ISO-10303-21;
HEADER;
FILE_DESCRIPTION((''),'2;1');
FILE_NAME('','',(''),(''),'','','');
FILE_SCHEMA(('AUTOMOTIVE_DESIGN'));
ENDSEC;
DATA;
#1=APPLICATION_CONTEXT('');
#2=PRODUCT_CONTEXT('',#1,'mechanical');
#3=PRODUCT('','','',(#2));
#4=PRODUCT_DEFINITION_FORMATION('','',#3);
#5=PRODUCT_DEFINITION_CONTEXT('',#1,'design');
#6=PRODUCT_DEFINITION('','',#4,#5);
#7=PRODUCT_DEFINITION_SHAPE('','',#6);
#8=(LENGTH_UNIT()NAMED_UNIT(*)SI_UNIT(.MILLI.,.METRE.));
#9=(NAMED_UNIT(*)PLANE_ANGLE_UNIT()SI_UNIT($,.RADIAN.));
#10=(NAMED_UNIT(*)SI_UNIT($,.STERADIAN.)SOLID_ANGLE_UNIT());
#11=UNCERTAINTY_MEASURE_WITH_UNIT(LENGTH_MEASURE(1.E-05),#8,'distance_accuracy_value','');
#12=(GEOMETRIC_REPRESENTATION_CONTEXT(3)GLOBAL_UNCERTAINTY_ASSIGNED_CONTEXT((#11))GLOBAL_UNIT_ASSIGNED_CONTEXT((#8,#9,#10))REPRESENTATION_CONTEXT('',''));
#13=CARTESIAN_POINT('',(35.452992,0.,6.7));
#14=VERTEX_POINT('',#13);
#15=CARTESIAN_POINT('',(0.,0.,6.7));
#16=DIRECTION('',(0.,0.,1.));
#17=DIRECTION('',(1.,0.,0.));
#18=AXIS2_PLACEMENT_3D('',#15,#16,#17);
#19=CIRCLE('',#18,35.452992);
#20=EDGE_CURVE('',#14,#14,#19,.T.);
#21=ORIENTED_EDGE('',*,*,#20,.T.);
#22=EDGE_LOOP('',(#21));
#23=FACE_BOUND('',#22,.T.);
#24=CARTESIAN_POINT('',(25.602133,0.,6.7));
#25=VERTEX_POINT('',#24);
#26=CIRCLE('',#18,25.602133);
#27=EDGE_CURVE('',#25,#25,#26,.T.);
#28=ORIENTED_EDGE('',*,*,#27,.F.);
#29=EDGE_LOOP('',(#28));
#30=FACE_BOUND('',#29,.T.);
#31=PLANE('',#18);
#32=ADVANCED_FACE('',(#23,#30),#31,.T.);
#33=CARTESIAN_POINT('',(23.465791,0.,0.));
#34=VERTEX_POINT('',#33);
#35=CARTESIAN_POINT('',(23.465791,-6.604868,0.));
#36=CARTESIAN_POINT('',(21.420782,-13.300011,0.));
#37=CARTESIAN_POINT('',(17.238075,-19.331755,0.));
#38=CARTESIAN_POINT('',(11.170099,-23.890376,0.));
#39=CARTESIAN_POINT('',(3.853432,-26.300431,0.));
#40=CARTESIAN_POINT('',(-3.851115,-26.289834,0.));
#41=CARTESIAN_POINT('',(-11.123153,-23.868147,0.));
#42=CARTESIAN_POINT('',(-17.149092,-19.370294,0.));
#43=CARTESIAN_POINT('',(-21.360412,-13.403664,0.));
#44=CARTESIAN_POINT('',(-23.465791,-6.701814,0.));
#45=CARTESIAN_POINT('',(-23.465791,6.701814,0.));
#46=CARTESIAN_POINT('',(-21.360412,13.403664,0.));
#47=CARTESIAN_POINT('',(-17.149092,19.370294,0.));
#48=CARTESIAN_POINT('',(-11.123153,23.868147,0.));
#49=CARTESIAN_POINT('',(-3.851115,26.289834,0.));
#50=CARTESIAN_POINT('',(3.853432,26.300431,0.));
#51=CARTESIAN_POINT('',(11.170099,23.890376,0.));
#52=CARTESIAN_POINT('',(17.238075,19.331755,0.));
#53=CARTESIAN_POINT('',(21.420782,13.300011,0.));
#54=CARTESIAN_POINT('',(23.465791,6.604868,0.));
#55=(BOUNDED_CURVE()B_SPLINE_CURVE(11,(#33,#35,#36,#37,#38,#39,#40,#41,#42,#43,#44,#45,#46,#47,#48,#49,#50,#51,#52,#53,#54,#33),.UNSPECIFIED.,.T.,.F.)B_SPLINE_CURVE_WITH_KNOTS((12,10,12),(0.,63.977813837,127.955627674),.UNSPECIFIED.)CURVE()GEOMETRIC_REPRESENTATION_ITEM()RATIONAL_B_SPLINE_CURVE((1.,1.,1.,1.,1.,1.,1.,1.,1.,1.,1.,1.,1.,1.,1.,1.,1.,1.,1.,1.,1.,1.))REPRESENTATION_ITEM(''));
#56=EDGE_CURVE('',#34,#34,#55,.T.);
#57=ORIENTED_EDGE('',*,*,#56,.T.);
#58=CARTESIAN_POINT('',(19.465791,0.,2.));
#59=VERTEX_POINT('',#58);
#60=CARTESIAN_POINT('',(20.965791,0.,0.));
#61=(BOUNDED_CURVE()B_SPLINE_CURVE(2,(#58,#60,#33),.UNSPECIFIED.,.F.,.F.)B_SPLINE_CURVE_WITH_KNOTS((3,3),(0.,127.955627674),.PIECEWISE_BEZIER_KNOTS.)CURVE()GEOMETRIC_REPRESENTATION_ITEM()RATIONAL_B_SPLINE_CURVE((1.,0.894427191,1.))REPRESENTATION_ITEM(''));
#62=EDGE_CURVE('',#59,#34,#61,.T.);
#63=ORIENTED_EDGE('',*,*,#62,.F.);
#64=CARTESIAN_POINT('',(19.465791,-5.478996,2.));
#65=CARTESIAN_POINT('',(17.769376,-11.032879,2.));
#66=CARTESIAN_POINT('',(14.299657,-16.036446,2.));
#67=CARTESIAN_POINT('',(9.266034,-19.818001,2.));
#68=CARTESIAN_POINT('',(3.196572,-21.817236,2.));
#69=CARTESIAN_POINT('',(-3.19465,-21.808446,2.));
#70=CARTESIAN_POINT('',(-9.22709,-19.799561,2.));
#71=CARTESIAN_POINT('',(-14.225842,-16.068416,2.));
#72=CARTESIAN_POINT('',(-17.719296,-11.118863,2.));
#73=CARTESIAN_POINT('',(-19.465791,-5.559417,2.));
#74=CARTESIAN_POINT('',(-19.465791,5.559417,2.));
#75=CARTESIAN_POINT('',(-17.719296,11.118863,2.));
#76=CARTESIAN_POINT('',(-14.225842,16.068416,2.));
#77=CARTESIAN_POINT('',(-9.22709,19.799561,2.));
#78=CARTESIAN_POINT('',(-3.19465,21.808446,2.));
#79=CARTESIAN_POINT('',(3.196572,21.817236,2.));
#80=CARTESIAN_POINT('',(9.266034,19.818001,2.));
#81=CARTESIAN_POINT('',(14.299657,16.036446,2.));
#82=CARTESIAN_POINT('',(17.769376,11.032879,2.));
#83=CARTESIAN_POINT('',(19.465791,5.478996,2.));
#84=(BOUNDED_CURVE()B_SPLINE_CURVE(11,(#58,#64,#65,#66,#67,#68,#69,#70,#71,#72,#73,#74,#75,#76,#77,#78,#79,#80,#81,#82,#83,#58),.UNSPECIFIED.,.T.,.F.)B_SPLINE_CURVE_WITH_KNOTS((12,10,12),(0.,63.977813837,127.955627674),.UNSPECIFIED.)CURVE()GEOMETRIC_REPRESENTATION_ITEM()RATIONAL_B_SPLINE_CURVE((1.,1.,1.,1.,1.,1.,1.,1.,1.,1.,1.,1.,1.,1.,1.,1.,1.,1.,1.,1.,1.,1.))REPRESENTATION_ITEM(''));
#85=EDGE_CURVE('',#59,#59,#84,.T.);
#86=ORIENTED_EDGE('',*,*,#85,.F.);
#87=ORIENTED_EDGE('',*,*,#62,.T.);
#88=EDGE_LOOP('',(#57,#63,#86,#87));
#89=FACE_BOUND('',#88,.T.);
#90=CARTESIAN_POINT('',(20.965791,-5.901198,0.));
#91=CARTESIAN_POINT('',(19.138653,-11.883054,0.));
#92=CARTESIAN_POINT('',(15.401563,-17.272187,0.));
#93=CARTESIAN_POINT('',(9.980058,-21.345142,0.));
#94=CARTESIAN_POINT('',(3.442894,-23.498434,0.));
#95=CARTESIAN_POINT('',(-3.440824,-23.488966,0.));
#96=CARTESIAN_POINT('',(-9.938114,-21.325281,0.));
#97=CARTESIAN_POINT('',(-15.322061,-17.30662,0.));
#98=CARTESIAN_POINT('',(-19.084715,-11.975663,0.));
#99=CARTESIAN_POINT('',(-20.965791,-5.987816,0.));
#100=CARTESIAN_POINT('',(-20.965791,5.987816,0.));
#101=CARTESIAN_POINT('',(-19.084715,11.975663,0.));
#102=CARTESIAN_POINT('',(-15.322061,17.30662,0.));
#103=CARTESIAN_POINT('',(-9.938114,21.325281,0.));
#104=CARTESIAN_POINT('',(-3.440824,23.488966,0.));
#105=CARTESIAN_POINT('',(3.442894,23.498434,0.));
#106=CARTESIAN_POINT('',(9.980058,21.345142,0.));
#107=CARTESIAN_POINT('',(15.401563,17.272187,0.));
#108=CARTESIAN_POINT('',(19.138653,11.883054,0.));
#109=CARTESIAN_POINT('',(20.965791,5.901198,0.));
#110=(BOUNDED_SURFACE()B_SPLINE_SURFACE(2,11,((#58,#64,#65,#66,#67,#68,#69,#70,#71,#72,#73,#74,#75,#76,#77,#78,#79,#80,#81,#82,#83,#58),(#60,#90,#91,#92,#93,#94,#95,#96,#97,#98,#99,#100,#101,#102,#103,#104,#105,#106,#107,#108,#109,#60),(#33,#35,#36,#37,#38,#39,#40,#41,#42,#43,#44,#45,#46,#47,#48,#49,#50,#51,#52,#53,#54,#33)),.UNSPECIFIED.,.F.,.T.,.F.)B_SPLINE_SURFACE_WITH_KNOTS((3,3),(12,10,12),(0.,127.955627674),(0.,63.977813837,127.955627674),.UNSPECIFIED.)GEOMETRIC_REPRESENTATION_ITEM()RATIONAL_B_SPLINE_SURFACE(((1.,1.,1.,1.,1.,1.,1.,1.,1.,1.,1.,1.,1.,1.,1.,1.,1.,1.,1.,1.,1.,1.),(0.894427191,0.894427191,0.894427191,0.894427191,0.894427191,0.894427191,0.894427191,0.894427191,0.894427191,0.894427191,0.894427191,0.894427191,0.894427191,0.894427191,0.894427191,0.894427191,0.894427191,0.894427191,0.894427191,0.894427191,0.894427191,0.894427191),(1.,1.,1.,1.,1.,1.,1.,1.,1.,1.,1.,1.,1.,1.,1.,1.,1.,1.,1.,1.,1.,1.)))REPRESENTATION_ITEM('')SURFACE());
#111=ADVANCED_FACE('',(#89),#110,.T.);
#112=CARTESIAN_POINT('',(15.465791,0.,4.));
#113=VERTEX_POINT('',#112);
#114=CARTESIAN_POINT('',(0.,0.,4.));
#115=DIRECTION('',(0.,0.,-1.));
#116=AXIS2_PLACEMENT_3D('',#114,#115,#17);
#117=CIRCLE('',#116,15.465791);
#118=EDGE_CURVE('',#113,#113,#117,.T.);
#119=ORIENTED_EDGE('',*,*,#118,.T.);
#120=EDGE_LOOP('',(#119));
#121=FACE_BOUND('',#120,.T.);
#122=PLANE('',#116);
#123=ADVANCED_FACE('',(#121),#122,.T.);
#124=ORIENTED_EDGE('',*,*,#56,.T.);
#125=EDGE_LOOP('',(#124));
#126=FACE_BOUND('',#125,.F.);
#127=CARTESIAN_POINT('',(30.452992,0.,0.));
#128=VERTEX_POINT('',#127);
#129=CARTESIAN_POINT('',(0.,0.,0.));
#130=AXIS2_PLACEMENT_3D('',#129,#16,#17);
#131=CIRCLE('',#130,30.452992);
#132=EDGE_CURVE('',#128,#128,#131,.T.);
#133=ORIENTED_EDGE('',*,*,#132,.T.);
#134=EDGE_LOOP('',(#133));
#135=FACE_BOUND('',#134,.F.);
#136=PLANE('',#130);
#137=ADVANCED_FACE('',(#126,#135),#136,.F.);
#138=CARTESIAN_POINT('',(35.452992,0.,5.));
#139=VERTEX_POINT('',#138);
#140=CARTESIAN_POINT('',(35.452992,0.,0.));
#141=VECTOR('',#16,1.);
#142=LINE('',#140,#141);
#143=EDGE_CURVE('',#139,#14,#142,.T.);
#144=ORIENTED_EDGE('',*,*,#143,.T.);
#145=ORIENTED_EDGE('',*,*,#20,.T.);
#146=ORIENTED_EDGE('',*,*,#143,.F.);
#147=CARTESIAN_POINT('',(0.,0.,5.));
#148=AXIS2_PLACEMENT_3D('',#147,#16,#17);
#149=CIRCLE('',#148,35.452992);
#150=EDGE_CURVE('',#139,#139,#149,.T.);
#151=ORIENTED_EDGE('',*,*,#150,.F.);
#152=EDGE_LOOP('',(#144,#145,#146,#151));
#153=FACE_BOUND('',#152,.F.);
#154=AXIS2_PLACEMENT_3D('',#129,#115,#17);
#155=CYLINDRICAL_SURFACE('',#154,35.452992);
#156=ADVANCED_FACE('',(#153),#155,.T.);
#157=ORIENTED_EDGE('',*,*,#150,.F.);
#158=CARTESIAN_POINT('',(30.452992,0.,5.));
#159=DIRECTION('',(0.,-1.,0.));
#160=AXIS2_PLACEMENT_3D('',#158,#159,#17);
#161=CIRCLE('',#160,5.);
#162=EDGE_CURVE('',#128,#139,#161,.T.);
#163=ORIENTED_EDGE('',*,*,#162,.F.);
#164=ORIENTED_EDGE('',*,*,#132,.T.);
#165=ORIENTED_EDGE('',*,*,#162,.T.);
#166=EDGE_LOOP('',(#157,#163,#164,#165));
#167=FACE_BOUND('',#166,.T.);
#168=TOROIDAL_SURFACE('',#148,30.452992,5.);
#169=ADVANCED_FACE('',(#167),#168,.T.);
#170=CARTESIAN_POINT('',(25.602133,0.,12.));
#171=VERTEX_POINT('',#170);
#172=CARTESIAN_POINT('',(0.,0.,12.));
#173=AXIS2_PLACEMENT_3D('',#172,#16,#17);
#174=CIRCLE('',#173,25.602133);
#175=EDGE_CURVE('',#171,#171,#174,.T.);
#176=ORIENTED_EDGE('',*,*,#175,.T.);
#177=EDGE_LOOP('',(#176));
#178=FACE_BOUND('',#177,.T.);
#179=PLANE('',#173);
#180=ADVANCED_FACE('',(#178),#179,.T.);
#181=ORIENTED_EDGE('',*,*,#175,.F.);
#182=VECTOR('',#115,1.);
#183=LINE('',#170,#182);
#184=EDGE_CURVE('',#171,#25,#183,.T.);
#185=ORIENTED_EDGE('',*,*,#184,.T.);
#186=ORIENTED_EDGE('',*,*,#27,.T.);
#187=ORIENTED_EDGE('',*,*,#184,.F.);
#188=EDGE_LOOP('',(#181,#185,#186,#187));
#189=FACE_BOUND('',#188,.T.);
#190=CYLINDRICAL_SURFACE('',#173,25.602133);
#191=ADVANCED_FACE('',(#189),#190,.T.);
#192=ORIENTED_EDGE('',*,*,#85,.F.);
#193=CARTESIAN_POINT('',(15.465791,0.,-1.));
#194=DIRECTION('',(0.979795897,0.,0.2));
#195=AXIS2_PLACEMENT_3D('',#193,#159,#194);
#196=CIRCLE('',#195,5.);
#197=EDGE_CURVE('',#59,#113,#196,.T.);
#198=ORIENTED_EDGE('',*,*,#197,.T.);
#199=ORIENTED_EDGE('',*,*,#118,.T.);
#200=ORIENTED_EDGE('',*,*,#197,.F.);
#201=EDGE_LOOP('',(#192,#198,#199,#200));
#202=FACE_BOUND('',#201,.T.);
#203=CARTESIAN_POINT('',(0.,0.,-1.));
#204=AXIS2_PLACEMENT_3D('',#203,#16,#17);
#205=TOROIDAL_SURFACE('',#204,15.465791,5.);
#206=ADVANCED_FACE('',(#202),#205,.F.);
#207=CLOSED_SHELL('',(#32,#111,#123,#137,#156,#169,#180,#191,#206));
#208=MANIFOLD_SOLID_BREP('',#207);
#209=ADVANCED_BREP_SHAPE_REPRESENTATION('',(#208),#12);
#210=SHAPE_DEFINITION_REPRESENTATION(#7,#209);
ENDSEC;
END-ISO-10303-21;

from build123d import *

# Parameters (mm, degrees)
F0_R     = 35.4529924148
F0_R_2   = 26.5998947574
F1_DEPTH = 12
F2_R     = 20.3647706408
F3_DEPTH = 4
F5_R     = 5
F6_R     = 5
F7_R     = 35.4529924148
F7_R_2   = 25.6021329211
F8_DEPTH = 5.3


# Not quite as in the source:
# - a fillet or chamfer that OpenCascade refuses, or shapes differently, is made with other operations: its cross-section is extruded or revolved along the edge and cut away or added


with BuildPart() as f1:
    # F0 (on Top) → F1 (new body)
    with BuildSketch(Plane.XY):
        Circle(F0_R)
        Circle(F0_R_2, mode=Mode.SUBTRACT)
        Circle(F0_R_2)
    extrude(amount=F1_DEPTH)

    # F2 (on face) → F3 (cut)
    with BuildSketch(Plane(origin=(0, 0, 0), x_dir=(1, 0, 0), z_dir=(0, 0, -1))):
        Circle(F2_R)
    extrude(amount=-F3_DEPTH, mode=Mode.SUBTRACT)

    # F4: fillet of radius 5 on 1 edges, made by hand

    # F4_s1 → F4_t2 (revolve)
    with BuildSketch(Plane.XZ):
        with BuildLine():
            ThreePointArc((20.3647706408, 0), (18.6280688154, 2.8729833462), (15.4657911552, 4))
            Line((15.4657911552, 4), (20.3647706408, 4))
            Line((20.3647706408, 4), (20.3647706408, 0))
        make_face()
    revolve(axis=Axis((0, 0, 4), (0, 0, -1)))

    # F5
    f5_edges = [f1.edges().sort_by_distance(p)[0] for p in [
        (-20.364771, 0, 0),
    ]]
    fillet(f5_edges, radius=F5_R)

    # F6
    f6_edges = [f1.edges().sort_by_distance(p)[0] for p in [
        (-35.452992, 0, 0),
    ]]
    fillet(f6_edges, radius=F6_R)

    # F7 (on face) → F8 (cut)
    with BuildSketch(Plane.XY.offset(12)):
        Circle(F7_R)
        Circle(F7_R_2, mode=Mode.SUBTRACT)
    extrude(amount=-F8_DEPTH, mode=Mode.SUBTRACT)


solid = f1.part
